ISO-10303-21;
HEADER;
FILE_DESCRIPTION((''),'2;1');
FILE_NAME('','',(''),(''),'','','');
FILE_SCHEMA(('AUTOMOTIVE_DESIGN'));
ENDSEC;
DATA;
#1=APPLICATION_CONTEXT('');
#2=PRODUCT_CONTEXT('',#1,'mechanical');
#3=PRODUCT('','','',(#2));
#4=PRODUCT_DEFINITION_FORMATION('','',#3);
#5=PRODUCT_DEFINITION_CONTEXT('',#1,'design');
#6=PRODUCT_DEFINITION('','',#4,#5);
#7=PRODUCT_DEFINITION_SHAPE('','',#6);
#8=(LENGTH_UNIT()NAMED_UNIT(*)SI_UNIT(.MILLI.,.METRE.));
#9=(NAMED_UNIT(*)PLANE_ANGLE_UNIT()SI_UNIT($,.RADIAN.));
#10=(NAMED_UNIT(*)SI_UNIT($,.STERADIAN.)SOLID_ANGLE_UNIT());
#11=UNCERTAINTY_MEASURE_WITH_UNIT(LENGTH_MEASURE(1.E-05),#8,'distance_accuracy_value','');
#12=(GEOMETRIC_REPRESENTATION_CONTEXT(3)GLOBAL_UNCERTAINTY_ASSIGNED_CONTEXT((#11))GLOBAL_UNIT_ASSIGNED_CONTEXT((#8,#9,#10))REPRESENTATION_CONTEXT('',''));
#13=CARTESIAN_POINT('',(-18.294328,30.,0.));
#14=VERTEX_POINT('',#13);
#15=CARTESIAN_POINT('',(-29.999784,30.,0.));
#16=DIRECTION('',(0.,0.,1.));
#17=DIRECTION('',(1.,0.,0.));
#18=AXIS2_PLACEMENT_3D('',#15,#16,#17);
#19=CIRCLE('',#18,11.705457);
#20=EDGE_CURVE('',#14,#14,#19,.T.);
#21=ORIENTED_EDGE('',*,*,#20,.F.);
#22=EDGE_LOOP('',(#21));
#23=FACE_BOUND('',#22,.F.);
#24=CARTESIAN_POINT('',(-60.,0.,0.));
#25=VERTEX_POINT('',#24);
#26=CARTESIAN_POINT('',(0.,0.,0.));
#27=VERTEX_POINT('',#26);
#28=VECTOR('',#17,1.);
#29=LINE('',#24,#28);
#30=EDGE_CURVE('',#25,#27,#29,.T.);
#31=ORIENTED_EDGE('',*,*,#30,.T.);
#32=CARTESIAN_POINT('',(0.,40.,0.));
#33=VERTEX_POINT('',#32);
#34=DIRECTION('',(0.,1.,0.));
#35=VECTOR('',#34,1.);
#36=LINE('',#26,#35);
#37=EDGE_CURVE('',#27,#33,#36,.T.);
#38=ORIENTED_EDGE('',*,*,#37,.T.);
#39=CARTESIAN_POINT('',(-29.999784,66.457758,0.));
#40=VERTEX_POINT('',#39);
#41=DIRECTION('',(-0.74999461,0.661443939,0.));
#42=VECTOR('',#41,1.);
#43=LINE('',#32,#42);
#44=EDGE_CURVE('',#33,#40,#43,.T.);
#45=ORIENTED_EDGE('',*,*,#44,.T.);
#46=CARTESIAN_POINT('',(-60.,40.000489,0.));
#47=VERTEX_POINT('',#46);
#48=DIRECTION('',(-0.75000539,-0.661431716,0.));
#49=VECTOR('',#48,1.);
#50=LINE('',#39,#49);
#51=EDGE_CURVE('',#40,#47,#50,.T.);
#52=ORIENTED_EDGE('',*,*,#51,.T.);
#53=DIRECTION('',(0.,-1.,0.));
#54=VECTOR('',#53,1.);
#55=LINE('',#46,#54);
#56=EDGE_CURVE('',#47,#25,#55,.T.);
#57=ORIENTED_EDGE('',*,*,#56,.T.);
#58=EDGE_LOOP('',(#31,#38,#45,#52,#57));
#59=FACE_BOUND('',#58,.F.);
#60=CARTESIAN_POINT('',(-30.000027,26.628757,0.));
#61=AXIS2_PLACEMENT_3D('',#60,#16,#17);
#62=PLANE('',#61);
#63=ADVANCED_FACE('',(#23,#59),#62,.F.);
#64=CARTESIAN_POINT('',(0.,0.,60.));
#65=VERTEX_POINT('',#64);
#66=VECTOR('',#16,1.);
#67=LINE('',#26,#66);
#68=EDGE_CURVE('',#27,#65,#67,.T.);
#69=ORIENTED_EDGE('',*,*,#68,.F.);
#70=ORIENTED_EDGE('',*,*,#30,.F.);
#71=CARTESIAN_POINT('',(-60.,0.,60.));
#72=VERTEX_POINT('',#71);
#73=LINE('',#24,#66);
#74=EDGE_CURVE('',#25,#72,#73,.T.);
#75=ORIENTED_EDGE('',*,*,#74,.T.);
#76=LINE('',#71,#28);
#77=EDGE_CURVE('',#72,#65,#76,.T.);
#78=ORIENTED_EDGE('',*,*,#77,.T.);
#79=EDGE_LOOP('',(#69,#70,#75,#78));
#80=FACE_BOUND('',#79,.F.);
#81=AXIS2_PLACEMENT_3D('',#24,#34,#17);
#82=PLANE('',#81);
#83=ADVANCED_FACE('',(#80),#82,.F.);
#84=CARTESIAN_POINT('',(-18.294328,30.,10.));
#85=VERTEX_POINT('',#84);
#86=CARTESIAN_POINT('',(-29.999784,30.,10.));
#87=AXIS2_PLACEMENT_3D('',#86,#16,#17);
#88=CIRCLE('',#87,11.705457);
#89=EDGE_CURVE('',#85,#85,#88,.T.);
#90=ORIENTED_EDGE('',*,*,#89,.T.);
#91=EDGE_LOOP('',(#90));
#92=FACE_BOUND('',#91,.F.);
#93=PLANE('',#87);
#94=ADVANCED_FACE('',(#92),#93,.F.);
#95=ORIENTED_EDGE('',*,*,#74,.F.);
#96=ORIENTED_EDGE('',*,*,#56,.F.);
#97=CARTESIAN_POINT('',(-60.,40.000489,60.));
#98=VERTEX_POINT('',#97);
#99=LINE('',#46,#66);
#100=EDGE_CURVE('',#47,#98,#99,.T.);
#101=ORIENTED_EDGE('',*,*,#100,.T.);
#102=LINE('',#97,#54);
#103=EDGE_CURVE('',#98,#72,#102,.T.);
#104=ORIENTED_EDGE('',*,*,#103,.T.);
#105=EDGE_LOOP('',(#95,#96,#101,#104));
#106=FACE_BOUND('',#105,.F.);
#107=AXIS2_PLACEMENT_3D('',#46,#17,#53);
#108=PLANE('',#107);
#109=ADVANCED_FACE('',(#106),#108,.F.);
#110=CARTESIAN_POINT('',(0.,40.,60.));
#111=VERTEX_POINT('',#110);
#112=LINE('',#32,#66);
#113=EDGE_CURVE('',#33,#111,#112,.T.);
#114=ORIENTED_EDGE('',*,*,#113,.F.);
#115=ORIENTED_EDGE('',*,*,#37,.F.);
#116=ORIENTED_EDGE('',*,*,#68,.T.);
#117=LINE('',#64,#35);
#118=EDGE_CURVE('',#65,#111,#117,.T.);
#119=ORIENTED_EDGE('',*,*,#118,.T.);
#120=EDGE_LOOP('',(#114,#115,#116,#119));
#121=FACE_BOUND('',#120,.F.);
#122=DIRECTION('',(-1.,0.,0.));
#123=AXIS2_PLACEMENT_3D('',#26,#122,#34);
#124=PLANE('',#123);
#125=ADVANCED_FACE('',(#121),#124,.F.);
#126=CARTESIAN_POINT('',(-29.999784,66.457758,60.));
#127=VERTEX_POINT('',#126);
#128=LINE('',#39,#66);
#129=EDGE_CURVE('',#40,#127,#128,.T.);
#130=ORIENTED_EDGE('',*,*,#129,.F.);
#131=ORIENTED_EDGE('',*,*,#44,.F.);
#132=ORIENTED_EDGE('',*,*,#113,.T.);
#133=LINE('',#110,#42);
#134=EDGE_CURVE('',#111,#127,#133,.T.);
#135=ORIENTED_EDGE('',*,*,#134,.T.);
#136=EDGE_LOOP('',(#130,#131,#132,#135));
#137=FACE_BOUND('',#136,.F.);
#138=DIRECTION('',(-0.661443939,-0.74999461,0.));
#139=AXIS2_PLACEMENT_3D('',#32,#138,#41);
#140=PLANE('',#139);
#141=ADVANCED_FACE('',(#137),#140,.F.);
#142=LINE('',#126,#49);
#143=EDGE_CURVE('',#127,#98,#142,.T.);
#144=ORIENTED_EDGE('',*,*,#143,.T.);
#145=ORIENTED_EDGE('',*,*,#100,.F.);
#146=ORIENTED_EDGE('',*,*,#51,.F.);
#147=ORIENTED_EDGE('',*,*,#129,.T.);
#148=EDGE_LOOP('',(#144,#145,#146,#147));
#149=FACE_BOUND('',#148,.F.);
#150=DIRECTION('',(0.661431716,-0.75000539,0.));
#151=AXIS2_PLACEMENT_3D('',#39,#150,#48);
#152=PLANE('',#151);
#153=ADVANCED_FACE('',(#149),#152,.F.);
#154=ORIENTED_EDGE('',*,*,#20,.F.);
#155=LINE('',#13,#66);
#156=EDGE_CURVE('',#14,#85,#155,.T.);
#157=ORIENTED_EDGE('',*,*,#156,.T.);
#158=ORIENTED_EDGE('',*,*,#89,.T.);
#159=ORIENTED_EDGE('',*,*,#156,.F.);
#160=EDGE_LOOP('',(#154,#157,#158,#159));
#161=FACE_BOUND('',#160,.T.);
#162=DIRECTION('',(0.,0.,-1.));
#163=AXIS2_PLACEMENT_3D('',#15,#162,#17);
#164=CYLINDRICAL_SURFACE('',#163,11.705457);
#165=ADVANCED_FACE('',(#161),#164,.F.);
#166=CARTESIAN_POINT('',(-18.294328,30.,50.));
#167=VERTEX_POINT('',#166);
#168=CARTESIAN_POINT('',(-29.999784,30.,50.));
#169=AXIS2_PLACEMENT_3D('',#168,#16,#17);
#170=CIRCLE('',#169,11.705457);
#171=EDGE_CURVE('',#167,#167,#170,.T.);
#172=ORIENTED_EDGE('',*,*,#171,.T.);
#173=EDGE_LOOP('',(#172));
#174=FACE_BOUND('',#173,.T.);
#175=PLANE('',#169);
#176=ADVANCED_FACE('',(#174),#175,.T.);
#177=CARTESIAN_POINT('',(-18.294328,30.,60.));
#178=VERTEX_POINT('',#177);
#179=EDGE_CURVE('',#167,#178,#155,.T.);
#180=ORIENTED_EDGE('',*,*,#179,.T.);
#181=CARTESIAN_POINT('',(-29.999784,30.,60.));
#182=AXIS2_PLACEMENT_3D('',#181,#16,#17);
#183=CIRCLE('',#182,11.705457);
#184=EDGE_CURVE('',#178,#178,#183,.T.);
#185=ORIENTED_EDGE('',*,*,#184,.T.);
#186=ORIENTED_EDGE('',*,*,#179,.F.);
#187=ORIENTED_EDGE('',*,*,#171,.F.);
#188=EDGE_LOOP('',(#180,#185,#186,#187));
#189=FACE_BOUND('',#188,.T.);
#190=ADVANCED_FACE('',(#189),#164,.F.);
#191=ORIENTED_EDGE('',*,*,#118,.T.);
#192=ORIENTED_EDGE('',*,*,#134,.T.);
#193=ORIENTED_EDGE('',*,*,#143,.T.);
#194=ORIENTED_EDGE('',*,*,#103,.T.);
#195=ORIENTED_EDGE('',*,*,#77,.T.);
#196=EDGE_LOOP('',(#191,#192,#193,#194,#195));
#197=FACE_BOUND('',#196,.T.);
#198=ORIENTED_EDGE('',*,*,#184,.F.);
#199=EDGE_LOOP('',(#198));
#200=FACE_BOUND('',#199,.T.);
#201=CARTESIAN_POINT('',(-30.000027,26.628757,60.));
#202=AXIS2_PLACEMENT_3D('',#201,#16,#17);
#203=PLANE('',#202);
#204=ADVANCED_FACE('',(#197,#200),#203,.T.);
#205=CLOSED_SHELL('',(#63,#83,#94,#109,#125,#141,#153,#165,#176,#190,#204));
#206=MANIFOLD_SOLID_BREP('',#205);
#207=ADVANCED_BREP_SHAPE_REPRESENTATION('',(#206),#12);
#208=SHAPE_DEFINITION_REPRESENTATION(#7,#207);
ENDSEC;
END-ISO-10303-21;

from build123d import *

# Parameters (mm, degrees)
F0_R     = 11.7054565065
F1_DEPTH = 60
F2_START = 10
F2_DEPTH = 40


# Not quite as in the source:
# - a feature names something its author has since deleted; it is built from what else it names


with BuildPart() as f1:
    # F0 (on Top) → F1 (new body)
    with BuildSketch(Plane.XY):
        Polygon((-60, 40.0004889347), (-60, 0), (0, 0), (0, 40), (-29.9997844001, 66.457757576), align=None)
        with Locations((-29.9997844001, 30)):
            Circle(F0_R, mode=Mode.SUBTRACT)
    extrude(amount=F1_DEPTH)

    # F0 (on Top) → F2 (join)
    with BuildSketch(Plane.XY.offset(F2_START)):
        with Locations((-29.9997844001, 30)):
            Circle(F0_R)
    extrude(amount=F2_DEPTH)


solid = f1.part
